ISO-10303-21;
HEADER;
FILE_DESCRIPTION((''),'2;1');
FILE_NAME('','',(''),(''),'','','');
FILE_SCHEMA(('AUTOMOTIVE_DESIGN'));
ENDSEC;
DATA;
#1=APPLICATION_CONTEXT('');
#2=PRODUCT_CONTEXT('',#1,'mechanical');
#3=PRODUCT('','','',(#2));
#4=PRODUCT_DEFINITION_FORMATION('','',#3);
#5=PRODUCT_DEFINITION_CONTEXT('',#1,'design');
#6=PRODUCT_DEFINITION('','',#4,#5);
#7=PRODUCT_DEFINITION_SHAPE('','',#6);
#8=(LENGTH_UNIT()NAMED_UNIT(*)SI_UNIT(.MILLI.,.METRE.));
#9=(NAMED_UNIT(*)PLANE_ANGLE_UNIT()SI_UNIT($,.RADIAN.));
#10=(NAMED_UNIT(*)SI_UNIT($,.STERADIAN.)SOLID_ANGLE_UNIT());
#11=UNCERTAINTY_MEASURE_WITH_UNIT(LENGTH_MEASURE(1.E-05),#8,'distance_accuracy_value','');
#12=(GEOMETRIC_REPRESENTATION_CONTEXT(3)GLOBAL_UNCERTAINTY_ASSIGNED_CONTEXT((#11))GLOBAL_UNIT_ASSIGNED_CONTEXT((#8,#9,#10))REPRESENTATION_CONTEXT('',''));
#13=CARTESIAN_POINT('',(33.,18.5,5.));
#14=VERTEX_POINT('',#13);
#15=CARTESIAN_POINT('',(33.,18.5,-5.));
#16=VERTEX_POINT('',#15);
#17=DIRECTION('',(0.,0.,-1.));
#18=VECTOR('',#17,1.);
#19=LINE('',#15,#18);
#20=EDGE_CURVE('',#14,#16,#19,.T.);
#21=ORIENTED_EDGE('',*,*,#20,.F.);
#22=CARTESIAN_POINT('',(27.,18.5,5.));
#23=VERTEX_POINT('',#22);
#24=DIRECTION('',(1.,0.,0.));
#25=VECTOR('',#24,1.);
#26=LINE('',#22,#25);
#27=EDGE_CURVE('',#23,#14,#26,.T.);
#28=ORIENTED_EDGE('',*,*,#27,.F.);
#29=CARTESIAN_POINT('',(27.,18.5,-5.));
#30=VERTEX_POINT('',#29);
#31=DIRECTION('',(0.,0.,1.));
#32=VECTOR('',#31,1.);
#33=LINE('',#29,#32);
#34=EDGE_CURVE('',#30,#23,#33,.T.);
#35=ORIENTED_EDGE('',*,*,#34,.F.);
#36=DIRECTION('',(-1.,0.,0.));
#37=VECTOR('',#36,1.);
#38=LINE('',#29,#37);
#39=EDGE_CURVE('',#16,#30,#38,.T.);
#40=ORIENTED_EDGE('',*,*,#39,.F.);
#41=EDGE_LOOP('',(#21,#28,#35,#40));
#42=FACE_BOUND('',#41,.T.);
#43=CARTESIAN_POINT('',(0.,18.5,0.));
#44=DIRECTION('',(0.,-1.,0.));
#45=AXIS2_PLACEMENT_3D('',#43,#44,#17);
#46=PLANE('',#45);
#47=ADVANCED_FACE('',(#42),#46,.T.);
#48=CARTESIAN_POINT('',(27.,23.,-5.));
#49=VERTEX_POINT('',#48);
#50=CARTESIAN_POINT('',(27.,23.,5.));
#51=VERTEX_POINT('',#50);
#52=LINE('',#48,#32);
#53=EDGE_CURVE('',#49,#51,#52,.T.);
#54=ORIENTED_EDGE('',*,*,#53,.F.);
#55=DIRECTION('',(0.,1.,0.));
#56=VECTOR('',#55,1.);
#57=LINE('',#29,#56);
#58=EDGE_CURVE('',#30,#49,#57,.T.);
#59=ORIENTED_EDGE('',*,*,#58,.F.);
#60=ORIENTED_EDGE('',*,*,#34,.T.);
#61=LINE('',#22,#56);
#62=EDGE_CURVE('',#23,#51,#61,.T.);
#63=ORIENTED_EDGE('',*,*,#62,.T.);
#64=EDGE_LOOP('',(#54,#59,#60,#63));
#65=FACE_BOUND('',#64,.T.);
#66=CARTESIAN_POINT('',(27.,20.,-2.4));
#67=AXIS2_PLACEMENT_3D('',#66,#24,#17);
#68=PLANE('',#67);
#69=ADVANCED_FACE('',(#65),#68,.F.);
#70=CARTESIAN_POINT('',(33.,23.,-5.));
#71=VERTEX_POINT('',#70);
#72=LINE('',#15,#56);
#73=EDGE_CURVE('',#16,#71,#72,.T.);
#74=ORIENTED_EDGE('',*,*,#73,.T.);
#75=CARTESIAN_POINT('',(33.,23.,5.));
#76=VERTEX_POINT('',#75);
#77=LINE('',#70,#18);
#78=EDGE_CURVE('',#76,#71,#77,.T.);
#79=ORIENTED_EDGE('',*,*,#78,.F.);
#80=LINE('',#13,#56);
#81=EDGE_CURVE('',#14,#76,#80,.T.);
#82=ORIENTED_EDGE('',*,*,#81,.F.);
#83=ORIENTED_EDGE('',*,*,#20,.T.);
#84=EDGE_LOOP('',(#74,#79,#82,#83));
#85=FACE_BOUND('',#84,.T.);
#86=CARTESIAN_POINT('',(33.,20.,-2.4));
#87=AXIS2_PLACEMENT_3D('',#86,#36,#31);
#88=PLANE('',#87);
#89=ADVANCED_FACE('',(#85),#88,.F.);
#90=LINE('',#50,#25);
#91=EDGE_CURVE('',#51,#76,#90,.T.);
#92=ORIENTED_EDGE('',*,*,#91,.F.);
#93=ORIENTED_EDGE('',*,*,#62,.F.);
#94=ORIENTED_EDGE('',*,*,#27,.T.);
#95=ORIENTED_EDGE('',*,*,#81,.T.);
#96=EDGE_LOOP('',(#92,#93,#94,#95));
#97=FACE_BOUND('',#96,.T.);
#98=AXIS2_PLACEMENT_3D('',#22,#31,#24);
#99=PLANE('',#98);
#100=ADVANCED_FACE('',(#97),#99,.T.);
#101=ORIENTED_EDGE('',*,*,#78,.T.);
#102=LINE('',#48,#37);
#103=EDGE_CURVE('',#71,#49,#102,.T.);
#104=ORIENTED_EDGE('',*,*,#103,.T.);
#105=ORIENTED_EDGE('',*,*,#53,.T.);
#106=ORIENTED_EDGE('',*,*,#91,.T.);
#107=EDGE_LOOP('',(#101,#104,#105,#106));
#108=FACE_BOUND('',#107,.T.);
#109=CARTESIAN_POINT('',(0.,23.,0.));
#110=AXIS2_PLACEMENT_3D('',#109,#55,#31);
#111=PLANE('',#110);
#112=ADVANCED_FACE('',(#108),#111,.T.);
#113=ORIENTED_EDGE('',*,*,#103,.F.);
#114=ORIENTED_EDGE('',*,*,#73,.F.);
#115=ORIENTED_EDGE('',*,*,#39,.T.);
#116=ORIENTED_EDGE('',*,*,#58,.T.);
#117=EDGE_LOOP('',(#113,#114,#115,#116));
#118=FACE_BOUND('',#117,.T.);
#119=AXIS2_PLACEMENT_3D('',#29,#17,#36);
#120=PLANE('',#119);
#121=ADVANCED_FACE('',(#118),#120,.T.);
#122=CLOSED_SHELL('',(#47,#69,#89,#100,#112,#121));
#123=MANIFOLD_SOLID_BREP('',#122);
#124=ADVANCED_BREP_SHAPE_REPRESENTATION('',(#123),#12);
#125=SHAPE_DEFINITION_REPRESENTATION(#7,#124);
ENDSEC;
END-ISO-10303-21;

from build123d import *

# Parameters (mm, degrees)
BOSS_EXTRUDE1_DEPTH      = 12
BOSS_EXTRUDE2_START      = -2
BOSS_EXTRUDE2_DEPTH      = 2
SKETCH4_W                = 6
SKETCH4_H                = 4.8
BOSS_EXTRUDE3_DEPTH      = 22
BOSS_EXTRUDE4_DEPTH      = 3
BOSS_EXTRUDE4_DEPTH_BACK = 1.5
SKETCH5_W                = 6
SKETCH5_H                = 10
INTERSECT1_START         = -2
INTERSECT1_DEPTH         = 20.5


# Read off the part's stored shape, not the designer's step: Intersect1
with BuildPart() as part:
    # Sketch1 → Boss-Extrude1 (new body)
    with BuildSketch(Plane(origin=(0, 0, 0), x_dir=(1, 0, 0), z_dir=(0, 1, 0))):
        with BuildLine():
            Line((2.5, 27.386127875), (2.5, 25.377155081))
            ThreePointArc((2.5, 25.377155081), (25.5, 0), (2.5, -25.377155081))
            Line((2.5, -25.377155081), (2.5, -27.386127875))
            ThreePointArc((2.5, -27.386127875), (27.5, 0), (2.5, 27.386127875))
        make_face()
    extrude(amount=BOSS_EXTRUDE1_DEPTH)

    # Sketch2 → Boss-Extrude2 (add)
    with BuildSketch(Plane(origin=(0, 0, 0), x_dir=(1, 0, 0), z_dir=(0, 1, 0)).offset(BOSS_EXTRUDE2_START)):
        with BuildLine():
            Line((2.5, 27.386127875), (1.863636364, 20.415113507))
            ThreePointArc((1.863636364, 20.415113507), (20.5, 0), (1.863636364, -20.415113507))
            Line((1.863636364, -20.415113507), (2.5, -27.386127875))
            ThreePointArc((2.5, -27.386127875), (27.5, 0), (2.5, 27.386127875))
        make_face()
    extrude(amount=BOSS_EXTRUDE2_DEPTH)

    # Sketch4 → Boss-Extrude3 (add)
    with BuildSketch(Plane(origin=(0, -2, 0), x_dir=(1, 0, 0), z_dir=(0, 1, 0))):
        with Locations((30, 0)):
            Rectangle(SKETCH4_W, SKETCH4_H)
    extrude(amount=BOSS_EXTRUDE3_DEPTH)

    # Sketch5 → Boss-Extrude4 (add, two sides: drawn at the far end of the back side and taken through both)
    with BuildSketch(Plane(origin=(0, 20, 0), x_dir=(1, 0, 0), z_dir=(0, 1, 0)).offset(-BOSS_EXTRUDE4_DEPTH_BACK)):
        with Locations((30, 0)):
            Rectangle(SKETCH5_W, SKETCH5_H)
    extrude(amount=BOSS_EXTRUDE4_DEPTH + BOSS_EXTRUDE4_DEPTH_BACK)

    # Intersect1 outline → Intersect1 (cut)
    with BuildSketch(Plane(origin=(0, 0, 0), x_dir=(1, 0, 0), z_dir=(0, 1, 0)).offset(INTERSECT1_START)):
        with BuildLine():
            ThreePointArc((2.5, -27.386127875), (19.480900576, -19.409907593), (27.39507255, -2.4))
            Line((27.39507255, -2.4), (33, -2.4))
            Line((33, -2.4), (33, 2.4))
            Line((33, 2.4), (27.39507255, 2.4))
            ThreePointArc((27.39507255, 2.4), (19.480900576, 19.409907593), (2.5, 27.386127875))
            Line((2.5, 27.386127875), (1.863636364, 20.415113507))
            ThreePointArc((1.863636364, 20.415113507), (20.5, 0), (1.863636364, -20.415113507))
            Line((1.863636364, -20.415113507), (2.5, -27.386127875))
        make_face()
    extrude(amount=INTERSECT1_DEPTH, mode=Mode.SUBTRACT)


solid = part.part
